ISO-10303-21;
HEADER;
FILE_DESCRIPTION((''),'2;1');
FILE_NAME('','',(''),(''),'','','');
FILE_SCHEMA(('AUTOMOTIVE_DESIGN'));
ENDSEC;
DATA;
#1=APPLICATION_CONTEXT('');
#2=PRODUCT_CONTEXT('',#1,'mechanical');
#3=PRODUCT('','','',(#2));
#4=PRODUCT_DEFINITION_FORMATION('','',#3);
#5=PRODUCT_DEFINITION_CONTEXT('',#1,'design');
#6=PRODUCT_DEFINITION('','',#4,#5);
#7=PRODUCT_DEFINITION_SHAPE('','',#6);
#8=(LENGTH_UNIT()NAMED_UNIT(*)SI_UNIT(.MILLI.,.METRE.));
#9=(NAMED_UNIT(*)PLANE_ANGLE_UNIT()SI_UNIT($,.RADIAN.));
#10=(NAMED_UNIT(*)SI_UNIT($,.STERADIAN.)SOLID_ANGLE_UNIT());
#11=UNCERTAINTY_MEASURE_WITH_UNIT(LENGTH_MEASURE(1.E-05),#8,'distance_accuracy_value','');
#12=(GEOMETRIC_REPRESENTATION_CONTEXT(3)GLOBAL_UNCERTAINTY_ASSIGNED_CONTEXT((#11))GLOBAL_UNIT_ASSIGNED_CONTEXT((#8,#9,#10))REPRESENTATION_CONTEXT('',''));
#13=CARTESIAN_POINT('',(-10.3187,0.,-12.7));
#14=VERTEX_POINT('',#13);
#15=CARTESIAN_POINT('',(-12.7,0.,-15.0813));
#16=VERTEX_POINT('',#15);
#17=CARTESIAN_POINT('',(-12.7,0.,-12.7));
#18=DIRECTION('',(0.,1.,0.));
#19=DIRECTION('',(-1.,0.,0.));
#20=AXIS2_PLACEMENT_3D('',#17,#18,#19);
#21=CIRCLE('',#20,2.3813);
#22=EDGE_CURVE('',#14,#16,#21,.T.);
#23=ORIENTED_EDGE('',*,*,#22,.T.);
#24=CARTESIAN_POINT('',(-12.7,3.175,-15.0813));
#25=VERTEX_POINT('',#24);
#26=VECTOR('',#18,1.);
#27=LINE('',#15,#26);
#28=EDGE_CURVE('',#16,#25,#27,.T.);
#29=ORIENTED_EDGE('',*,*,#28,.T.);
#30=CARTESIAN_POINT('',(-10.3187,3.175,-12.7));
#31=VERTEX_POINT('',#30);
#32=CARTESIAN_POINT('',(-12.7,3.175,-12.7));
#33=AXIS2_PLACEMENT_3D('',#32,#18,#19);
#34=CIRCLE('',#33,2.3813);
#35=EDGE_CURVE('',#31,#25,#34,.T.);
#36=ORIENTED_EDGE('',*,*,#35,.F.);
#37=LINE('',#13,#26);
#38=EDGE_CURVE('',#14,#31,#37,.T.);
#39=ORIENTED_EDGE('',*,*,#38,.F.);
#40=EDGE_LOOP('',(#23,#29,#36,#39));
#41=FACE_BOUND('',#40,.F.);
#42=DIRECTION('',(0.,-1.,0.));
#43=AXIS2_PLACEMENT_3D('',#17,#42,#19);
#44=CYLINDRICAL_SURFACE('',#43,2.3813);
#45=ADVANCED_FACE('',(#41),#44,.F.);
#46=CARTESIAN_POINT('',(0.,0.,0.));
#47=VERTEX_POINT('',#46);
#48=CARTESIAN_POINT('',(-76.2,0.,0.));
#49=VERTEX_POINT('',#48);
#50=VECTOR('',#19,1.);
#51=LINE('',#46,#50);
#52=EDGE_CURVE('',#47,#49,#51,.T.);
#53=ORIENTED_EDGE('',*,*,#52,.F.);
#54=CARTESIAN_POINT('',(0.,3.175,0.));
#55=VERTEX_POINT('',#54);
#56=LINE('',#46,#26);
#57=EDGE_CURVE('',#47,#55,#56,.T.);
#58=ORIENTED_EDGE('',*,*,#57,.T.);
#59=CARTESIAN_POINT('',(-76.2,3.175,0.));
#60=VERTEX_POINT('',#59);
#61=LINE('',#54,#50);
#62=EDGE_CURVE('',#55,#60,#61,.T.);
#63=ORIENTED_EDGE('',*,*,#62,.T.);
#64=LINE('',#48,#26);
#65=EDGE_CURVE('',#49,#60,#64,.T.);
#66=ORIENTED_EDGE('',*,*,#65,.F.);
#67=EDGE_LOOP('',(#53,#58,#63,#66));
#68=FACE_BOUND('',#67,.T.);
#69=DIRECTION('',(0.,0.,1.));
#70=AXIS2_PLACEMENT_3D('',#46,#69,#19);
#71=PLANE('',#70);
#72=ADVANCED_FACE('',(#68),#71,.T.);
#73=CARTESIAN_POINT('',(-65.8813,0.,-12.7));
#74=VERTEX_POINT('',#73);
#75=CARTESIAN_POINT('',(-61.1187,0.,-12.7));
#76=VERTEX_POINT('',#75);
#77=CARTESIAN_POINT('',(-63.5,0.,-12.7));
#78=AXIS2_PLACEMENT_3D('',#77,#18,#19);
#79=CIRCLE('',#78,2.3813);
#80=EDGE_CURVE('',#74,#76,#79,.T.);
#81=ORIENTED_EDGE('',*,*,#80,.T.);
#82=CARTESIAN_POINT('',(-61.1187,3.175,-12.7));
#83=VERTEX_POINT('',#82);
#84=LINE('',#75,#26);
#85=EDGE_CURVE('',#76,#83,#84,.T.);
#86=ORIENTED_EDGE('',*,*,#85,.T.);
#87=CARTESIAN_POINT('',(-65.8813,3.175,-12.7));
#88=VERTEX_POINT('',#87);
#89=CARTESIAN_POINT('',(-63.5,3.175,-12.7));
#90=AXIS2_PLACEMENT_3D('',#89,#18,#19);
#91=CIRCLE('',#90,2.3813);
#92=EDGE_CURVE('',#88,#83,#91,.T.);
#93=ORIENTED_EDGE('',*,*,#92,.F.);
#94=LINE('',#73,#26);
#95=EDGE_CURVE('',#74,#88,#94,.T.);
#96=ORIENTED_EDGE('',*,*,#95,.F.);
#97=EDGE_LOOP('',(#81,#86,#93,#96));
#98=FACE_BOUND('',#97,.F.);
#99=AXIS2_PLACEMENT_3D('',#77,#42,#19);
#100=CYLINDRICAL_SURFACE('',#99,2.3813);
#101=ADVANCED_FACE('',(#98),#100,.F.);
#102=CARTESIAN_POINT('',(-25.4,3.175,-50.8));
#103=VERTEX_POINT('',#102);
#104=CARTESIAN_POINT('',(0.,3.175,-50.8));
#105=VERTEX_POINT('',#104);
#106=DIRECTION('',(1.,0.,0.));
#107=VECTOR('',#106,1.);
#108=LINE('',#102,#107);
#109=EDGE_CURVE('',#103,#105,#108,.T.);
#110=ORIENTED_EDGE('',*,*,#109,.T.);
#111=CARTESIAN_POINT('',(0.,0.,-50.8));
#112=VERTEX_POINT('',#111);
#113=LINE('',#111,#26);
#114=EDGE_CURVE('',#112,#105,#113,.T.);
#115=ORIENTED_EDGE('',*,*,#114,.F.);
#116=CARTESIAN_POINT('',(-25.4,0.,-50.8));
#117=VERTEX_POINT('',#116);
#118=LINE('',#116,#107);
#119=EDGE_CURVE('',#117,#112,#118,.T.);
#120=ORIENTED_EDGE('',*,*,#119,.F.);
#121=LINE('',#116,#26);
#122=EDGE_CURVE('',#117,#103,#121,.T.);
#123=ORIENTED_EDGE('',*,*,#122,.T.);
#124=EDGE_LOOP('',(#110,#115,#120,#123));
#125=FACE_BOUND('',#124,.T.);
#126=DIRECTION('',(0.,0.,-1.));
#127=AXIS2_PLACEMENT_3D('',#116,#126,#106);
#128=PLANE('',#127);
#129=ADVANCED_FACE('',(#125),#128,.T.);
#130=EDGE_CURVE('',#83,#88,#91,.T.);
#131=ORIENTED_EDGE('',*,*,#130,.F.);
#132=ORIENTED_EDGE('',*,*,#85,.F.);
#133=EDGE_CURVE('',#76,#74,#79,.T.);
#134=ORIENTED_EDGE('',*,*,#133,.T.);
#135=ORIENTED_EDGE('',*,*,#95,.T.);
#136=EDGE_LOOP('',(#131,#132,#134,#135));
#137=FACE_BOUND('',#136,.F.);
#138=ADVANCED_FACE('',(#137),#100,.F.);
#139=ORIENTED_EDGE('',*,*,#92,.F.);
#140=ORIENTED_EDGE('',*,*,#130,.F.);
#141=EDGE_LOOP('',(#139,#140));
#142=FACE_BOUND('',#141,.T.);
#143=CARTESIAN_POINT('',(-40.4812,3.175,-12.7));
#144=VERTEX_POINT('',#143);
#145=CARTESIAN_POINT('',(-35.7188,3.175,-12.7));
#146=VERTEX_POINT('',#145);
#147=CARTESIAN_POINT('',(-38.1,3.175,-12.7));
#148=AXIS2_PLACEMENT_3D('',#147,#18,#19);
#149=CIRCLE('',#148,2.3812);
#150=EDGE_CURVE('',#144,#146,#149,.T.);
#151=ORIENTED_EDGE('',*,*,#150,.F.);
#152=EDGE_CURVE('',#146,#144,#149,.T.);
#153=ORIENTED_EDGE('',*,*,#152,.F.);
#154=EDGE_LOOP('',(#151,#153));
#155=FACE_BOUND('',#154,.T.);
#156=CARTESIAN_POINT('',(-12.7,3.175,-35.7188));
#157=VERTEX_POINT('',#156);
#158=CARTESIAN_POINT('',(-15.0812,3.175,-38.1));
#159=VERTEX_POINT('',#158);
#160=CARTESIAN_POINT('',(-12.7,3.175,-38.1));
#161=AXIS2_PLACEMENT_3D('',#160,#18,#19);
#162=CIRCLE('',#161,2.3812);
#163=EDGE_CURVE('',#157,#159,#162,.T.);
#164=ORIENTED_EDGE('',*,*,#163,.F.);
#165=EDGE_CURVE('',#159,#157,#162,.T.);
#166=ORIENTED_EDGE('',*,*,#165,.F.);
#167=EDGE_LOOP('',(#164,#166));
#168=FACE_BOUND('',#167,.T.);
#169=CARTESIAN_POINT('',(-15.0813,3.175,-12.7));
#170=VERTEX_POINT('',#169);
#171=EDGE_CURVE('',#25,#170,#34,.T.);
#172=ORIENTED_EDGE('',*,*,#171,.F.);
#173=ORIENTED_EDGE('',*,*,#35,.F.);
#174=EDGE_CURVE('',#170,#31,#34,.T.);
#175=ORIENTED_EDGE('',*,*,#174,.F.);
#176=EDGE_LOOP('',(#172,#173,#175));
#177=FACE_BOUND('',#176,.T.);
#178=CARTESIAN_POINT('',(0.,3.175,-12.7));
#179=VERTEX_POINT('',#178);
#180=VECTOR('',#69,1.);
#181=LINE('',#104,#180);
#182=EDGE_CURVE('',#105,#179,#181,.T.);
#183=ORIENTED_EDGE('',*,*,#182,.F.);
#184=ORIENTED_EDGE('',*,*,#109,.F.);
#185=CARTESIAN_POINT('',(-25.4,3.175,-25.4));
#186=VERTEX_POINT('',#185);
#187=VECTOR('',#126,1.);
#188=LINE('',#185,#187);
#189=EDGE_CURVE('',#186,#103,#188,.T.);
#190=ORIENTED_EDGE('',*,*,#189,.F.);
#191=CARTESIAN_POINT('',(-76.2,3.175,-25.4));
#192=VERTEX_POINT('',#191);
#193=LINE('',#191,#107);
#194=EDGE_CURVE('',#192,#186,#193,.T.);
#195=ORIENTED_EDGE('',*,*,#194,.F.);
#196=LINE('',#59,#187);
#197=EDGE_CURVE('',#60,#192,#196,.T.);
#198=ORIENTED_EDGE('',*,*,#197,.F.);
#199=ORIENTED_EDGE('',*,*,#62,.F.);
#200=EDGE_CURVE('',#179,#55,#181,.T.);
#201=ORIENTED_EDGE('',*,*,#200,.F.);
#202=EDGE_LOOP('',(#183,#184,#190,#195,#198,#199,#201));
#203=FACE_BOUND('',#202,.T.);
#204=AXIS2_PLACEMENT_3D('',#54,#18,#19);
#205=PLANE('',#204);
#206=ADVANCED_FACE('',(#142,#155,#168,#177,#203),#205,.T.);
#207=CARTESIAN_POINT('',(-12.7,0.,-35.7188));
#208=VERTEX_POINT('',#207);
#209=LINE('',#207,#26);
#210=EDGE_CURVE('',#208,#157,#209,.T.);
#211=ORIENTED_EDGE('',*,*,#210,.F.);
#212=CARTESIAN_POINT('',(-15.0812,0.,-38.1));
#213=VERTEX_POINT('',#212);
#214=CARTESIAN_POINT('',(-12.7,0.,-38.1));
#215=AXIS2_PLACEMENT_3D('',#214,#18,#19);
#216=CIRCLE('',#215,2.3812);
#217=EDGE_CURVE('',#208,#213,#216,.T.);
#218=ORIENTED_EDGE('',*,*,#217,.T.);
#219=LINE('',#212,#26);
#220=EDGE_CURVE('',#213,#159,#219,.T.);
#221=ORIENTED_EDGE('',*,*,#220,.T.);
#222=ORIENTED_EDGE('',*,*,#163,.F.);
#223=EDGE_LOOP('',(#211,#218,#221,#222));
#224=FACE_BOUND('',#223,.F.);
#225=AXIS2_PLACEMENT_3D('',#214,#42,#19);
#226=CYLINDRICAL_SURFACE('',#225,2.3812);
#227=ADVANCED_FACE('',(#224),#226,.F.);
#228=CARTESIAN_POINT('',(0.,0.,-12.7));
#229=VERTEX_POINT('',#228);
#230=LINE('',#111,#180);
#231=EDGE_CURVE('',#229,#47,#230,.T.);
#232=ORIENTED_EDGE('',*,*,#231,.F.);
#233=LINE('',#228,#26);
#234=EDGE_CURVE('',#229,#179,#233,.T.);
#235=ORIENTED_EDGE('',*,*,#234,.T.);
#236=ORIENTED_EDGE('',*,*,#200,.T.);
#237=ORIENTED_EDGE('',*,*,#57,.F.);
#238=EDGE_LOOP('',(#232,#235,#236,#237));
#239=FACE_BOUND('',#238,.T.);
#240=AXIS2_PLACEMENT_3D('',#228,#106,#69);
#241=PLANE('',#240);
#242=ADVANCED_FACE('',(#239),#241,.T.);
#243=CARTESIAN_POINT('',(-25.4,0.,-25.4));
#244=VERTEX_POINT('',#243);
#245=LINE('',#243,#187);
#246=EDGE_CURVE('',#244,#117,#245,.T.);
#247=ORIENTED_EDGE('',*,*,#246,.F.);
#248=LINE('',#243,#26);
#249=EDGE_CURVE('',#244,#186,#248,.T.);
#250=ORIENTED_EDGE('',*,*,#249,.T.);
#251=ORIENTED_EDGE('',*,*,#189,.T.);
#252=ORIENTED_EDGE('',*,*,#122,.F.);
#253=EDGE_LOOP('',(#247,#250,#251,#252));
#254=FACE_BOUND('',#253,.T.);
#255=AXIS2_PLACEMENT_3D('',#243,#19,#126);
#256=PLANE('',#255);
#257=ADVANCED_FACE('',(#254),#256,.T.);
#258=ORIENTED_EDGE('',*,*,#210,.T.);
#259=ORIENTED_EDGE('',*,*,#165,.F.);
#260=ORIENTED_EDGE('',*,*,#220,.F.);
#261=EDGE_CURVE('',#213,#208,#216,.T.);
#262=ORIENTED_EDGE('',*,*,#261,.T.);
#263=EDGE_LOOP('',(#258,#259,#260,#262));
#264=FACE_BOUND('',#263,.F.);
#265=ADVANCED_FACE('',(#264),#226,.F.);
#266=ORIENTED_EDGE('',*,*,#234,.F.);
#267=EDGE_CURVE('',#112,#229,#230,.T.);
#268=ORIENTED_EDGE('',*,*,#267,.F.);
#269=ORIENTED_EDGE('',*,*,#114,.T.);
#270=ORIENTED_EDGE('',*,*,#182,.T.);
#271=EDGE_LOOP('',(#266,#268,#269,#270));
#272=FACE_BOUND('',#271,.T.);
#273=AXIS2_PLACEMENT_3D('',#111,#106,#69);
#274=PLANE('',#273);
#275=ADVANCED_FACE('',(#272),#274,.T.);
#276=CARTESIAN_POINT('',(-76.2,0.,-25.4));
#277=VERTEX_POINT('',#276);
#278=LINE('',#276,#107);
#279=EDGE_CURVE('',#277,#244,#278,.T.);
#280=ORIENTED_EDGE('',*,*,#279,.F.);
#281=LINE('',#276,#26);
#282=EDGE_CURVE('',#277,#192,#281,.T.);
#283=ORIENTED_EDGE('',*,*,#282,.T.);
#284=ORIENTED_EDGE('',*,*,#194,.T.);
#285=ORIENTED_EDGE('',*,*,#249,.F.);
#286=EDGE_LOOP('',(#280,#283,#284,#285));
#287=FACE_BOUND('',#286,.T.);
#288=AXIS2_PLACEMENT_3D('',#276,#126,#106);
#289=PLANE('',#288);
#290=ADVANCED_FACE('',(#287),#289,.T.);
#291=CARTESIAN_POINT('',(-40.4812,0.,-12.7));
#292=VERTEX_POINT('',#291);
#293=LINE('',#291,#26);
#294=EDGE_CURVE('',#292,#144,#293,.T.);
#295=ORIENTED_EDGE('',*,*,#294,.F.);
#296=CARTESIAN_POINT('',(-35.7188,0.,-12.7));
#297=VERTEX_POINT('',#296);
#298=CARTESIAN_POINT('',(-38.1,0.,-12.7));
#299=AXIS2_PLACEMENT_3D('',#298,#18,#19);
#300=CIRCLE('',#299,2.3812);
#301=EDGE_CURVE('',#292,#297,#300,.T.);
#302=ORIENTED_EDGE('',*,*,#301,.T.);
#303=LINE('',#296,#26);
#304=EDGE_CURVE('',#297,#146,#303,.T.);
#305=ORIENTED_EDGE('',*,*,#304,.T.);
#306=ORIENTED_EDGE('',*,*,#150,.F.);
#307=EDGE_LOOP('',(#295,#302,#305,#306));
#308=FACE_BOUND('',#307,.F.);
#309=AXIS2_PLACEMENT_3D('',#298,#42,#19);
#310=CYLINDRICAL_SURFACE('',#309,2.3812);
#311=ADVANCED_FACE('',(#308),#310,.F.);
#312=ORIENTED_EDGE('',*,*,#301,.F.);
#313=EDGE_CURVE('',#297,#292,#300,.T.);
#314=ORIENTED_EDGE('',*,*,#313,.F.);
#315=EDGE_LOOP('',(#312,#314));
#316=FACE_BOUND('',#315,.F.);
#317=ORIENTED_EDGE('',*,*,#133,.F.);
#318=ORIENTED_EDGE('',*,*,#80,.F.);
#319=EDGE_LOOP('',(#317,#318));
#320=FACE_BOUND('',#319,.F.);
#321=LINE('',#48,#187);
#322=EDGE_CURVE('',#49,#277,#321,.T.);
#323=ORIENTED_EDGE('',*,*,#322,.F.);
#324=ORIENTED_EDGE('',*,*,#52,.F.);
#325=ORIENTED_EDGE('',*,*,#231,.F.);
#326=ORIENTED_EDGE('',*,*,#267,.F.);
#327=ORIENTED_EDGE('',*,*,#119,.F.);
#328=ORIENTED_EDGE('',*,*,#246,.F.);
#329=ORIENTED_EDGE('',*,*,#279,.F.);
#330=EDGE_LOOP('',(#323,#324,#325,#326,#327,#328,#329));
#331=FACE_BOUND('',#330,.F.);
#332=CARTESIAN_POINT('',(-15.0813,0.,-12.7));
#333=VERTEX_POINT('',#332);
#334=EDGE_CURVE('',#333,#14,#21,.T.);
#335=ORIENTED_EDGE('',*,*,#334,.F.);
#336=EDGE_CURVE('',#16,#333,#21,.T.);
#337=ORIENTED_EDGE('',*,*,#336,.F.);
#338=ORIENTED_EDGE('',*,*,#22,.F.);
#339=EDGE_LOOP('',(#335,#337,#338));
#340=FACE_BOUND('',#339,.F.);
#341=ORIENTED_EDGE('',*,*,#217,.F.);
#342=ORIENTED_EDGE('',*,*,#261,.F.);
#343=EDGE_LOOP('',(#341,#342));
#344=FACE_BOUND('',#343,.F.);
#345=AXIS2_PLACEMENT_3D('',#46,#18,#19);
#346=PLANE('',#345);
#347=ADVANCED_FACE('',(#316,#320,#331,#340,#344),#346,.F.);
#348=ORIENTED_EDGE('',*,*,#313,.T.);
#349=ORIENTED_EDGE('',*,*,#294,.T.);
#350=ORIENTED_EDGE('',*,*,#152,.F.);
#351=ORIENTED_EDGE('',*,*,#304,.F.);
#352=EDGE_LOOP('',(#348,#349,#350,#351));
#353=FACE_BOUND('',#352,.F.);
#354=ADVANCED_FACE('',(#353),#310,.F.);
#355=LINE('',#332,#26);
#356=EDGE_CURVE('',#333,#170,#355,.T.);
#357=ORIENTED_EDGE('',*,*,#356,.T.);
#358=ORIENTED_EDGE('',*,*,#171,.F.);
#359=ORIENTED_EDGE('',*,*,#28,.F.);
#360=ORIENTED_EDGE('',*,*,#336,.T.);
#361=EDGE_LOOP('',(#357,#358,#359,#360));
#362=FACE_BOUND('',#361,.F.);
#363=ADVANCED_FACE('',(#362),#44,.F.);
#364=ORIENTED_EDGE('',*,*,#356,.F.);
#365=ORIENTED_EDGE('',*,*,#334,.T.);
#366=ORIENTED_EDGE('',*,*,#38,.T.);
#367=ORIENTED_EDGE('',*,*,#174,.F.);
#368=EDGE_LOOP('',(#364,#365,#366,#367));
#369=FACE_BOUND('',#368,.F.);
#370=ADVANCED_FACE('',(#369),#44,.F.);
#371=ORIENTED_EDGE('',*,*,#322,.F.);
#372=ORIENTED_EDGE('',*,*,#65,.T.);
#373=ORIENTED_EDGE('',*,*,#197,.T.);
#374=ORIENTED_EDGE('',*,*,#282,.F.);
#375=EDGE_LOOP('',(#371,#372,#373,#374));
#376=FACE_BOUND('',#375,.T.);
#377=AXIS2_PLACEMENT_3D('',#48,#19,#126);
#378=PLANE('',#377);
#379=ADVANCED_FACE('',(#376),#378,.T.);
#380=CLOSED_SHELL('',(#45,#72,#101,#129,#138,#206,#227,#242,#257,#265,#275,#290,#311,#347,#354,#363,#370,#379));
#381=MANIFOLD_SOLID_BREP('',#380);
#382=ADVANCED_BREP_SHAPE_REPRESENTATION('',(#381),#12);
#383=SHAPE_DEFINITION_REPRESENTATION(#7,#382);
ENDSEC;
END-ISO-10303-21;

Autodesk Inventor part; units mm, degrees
ref_plane "YZ Plane" through (0, 0, 0) normal (1, 0, 0) x (0, 1, 0)
ref_plane "XZ Plane" through (0, 0, 0) normal (0, 1, 0) x (-1, 0, 0)
ref_plane "XY Plane" through (0, 0, 0) normal (0, 0, 1) x (1, 0, 0)
sketch "Sketch1" plane through (0, 0, 0) normal (0, 1, 0) x (-1, 0, 0)
  line L0 (0, 0) -> (76.2, 0)
  line L1 (76.2, 0) -> (76.2, -25.4)
  line L2 (76.2, -25.4) -> (25.4, -25.4)
  line L3 (25.4, -25.4) -> (25.4, -50.8)
  line L4 (25.4, -50.8) -> (0, -50.8)
  line L5 (0, -50.8) -> (0, 0)
  line L6 (0, 0) -> (0, -12.7)
  line L7 (0, -12.7) -> (12.7, -12.7)
  circle A0 centre (12.7, -12.7) radius 2.3813
  line L8 (12.7, -12.7) -> (12.7, -38.1)
  circle A1 centre (12.7, -38.1) radius 2.3812
  line L9 (12.7, -12.7) -> (38.1, -12.7)
  circle A2 centre (38.1, -12.7) radius 2.3812
  line L10 (38.1, -12.7) -> (63.5, -12.7)
  circle A3 centre (63.5, -12.7) radius 2.3813
  dimension "d9" = 76.2
  dimension "d10" = 25.4
  dimension "d11" = 50.8
  dimension "d12" = 25.4
  dimension "d13" = 25.4
  dimension "d14" = 50.8
  dimension "d15" = 12.7
  dimension "d16" = 12.7
  dimension "d17" = 4.7625
  dimension "d18" = 25.4
  dimension "d19" = 4.7625
  dimension "d20" = 25.4
  dimension "d21" = 4.7625
  dimension "d22" = 25.4
  dimension "d23" = 4.7625
extrude "Extrusion1" add sketch "Sketch1" along normal blind 3.175
properties part number "LPlate"
